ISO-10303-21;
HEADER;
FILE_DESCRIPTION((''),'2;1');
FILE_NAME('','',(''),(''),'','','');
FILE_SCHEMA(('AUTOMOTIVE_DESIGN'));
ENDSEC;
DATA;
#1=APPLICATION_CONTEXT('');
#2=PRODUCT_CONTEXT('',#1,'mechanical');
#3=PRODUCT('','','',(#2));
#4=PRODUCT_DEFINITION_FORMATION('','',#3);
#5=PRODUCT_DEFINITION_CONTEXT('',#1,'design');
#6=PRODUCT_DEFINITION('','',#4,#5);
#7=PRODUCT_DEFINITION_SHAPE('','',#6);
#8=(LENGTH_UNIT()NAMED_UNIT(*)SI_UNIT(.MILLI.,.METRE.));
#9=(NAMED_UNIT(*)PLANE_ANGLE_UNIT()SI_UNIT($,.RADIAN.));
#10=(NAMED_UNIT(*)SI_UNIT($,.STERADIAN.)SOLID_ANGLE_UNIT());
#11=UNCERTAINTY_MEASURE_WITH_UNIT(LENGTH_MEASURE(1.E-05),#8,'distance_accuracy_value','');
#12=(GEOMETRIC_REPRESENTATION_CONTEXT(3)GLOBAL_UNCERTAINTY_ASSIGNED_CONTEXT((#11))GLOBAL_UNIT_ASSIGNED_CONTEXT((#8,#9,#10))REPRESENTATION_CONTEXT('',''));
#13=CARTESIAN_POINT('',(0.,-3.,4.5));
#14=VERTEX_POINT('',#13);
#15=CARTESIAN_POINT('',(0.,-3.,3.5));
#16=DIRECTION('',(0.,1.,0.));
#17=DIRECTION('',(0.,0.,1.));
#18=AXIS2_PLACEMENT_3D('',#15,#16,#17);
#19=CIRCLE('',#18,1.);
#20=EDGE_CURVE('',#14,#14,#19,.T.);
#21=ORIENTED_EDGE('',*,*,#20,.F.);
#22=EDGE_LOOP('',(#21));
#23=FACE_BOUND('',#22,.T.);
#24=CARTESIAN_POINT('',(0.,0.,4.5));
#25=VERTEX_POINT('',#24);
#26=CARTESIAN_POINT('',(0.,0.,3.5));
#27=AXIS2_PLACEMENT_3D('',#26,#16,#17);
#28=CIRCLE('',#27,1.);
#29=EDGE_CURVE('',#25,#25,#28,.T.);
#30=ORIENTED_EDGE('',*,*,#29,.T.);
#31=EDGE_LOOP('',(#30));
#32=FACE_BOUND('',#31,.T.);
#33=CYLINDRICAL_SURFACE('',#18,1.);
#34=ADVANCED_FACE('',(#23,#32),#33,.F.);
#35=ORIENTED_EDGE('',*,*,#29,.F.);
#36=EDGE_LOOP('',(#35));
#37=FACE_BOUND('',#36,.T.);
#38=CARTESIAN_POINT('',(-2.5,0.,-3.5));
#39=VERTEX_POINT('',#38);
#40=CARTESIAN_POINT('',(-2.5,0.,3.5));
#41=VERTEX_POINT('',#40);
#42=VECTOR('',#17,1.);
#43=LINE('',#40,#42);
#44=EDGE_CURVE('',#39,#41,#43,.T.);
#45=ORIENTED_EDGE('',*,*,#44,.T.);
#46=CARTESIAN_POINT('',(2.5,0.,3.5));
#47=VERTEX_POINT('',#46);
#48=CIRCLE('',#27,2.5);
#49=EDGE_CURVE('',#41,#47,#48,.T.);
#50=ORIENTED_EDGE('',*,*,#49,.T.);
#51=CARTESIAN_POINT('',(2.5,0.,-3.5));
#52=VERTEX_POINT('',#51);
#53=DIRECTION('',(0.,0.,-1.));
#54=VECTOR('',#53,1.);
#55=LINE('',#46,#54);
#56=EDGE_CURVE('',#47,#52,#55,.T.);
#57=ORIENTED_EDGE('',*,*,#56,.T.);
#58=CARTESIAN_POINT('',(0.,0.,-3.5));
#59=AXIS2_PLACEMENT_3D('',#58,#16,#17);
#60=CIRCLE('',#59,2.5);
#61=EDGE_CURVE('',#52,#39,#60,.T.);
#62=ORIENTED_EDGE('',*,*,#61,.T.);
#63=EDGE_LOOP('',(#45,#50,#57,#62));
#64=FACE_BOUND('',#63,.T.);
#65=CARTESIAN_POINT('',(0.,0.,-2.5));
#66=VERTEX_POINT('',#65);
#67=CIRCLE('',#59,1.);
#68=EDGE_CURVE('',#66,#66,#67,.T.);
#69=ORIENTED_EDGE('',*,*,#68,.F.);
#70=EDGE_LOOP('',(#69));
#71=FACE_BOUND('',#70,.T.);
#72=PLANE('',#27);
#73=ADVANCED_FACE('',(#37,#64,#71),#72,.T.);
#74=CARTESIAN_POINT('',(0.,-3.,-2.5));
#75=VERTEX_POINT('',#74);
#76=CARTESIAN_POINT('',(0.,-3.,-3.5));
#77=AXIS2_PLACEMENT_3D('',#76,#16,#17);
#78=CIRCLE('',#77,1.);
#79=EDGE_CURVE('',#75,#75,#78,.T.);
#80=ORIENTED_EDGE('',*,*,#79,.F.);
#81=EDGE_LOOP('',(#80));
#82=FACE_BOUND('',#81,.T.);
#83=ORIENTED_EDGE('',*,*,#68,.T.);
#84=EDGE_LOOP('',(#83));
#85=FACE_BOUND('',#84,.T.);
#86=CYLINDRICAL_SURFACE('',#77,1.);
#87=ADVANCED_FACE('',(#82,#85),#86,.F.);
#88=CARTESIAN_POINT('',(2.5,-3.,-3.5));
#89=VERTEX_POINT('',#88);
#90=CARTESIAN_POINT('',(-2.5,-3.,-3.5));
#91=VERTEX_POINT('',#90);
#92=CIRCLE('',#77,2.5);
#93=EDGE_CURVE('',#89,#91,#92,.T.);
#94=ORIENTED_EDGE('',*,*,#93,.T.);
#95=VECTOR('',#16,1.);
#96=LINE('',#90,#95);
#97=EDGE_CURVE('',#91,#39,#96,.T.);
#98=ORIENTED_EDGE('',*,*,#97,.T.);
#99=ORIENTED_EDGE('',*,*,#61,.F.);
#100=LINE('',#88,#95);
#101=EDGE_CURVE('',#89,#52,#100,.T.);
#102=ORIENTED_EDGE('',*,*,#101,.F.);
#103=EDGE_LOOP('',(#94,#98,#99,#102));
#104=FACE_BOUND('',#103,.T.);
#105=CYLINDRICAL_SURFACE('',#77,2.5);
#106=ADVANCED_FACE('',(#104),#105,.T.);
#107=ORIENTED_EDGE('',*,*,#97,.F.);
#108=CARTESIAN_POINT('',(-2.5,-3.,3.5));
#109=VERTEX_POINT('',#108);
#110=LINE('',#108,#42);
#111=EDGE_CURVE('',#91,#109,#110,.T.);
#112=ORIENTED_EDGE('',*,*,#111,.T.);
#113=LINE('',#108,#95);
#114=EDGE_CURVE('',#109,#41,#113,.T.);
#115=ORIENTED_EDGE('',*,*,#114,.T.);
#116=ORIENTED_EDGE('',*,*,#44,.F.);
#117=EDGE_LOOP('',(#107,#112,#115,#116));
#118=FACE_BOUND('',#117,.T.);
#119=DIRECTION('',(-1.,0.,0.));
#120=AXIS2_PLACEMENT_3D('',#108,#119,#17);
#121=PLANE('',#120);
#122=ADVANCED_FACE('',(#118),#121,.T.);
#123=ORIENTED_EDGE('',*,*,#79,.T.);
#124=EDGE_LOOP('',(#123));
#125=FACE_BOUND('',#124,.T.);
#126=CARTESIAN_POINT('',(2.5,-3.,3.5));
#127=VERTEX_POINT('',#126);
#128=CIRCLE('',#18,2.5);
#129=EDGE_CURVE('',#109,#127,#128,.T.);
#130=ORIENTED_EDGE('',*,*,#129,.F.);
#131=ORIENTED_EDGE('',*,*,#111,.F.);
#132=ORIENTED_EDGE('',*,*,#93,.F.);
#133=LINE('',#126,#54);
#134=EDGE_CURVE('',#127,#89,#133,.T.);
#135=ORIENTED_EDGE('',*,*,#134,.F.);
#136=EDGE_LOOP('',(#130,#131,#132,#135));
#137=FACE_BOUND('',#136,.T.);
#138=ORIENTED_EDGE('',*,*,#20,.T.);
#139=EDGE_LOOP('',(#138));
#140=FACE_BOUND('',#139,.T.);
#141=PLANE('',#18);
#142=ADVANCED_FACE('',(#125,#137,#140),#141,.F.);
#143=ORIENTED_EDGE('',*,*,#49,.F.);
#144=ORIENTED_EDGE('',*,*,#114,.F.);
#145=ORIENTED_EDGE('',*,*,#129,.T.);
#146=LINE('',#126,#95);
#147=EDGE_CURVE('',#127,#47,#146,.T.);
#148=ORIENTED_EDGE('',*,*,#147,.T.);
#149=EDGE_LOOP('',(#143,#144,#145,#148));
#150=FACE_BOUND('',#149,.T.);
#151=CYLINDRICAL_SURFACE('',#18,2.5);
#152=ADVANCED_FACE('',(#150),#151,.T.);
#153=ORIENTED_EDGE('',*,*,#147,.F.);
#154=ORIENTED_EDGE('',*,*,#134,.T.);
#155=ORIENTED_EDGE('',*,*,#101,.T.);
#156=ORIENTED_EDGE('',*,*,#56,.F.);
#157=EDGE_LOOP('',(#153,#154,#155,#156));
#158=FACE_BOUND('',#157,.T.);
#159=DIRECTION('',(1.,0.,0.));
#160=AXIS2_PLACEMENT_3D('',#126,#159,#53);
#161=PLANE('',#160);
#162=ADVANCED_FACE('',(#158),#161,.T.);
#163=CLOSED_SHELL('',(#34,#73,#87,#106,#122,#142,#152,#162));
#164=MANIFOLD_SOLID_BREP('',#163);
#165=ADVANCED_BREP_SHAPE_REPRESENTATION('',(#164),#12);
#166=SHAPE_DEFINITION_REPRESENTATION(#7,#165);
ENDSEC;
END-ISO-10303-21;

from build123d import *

# Parameters (mm, degrees)
CROQUIS1_R        = 1
BRIDA_BASE1_DEPTH = 3


# Sheet-metal steps are written as plain solids
with BuildPart() as part:
    # Croquis1 → Brida base1 (new body)
    with BuildSketch(Plane(origin=(0, 0, 0), x_dir=(1, 0, 0), z_dir=(0, 1, 0))):
        with BuildLine():
            Line((-2.5, -3.5), (-2.5, 3.5))
            ThreePointArc((-2.5, 3.5), (0, 6), (2.5, 3.5))
            Line((2.5, 3.5), (2.5, -3.5))
            ThreePointArc((2.5, -3.5), (0, -6), (-2.5, -3.5))
        make_face()
        with Locations(Location((0, 3.5, 0), (0, 0, 270))):
            Circle(CROQUIS1_R, mode=Mode.SUBTRACT)
        with Locations(Location((0, -3.5, 0), (0, 0, 270))):
            Circle(CROQUIS1_R, mode=Mode.SUBTRACT)
    extrude(amount=-BRIDA_BASE1_DEPTH)


solid = part.part
